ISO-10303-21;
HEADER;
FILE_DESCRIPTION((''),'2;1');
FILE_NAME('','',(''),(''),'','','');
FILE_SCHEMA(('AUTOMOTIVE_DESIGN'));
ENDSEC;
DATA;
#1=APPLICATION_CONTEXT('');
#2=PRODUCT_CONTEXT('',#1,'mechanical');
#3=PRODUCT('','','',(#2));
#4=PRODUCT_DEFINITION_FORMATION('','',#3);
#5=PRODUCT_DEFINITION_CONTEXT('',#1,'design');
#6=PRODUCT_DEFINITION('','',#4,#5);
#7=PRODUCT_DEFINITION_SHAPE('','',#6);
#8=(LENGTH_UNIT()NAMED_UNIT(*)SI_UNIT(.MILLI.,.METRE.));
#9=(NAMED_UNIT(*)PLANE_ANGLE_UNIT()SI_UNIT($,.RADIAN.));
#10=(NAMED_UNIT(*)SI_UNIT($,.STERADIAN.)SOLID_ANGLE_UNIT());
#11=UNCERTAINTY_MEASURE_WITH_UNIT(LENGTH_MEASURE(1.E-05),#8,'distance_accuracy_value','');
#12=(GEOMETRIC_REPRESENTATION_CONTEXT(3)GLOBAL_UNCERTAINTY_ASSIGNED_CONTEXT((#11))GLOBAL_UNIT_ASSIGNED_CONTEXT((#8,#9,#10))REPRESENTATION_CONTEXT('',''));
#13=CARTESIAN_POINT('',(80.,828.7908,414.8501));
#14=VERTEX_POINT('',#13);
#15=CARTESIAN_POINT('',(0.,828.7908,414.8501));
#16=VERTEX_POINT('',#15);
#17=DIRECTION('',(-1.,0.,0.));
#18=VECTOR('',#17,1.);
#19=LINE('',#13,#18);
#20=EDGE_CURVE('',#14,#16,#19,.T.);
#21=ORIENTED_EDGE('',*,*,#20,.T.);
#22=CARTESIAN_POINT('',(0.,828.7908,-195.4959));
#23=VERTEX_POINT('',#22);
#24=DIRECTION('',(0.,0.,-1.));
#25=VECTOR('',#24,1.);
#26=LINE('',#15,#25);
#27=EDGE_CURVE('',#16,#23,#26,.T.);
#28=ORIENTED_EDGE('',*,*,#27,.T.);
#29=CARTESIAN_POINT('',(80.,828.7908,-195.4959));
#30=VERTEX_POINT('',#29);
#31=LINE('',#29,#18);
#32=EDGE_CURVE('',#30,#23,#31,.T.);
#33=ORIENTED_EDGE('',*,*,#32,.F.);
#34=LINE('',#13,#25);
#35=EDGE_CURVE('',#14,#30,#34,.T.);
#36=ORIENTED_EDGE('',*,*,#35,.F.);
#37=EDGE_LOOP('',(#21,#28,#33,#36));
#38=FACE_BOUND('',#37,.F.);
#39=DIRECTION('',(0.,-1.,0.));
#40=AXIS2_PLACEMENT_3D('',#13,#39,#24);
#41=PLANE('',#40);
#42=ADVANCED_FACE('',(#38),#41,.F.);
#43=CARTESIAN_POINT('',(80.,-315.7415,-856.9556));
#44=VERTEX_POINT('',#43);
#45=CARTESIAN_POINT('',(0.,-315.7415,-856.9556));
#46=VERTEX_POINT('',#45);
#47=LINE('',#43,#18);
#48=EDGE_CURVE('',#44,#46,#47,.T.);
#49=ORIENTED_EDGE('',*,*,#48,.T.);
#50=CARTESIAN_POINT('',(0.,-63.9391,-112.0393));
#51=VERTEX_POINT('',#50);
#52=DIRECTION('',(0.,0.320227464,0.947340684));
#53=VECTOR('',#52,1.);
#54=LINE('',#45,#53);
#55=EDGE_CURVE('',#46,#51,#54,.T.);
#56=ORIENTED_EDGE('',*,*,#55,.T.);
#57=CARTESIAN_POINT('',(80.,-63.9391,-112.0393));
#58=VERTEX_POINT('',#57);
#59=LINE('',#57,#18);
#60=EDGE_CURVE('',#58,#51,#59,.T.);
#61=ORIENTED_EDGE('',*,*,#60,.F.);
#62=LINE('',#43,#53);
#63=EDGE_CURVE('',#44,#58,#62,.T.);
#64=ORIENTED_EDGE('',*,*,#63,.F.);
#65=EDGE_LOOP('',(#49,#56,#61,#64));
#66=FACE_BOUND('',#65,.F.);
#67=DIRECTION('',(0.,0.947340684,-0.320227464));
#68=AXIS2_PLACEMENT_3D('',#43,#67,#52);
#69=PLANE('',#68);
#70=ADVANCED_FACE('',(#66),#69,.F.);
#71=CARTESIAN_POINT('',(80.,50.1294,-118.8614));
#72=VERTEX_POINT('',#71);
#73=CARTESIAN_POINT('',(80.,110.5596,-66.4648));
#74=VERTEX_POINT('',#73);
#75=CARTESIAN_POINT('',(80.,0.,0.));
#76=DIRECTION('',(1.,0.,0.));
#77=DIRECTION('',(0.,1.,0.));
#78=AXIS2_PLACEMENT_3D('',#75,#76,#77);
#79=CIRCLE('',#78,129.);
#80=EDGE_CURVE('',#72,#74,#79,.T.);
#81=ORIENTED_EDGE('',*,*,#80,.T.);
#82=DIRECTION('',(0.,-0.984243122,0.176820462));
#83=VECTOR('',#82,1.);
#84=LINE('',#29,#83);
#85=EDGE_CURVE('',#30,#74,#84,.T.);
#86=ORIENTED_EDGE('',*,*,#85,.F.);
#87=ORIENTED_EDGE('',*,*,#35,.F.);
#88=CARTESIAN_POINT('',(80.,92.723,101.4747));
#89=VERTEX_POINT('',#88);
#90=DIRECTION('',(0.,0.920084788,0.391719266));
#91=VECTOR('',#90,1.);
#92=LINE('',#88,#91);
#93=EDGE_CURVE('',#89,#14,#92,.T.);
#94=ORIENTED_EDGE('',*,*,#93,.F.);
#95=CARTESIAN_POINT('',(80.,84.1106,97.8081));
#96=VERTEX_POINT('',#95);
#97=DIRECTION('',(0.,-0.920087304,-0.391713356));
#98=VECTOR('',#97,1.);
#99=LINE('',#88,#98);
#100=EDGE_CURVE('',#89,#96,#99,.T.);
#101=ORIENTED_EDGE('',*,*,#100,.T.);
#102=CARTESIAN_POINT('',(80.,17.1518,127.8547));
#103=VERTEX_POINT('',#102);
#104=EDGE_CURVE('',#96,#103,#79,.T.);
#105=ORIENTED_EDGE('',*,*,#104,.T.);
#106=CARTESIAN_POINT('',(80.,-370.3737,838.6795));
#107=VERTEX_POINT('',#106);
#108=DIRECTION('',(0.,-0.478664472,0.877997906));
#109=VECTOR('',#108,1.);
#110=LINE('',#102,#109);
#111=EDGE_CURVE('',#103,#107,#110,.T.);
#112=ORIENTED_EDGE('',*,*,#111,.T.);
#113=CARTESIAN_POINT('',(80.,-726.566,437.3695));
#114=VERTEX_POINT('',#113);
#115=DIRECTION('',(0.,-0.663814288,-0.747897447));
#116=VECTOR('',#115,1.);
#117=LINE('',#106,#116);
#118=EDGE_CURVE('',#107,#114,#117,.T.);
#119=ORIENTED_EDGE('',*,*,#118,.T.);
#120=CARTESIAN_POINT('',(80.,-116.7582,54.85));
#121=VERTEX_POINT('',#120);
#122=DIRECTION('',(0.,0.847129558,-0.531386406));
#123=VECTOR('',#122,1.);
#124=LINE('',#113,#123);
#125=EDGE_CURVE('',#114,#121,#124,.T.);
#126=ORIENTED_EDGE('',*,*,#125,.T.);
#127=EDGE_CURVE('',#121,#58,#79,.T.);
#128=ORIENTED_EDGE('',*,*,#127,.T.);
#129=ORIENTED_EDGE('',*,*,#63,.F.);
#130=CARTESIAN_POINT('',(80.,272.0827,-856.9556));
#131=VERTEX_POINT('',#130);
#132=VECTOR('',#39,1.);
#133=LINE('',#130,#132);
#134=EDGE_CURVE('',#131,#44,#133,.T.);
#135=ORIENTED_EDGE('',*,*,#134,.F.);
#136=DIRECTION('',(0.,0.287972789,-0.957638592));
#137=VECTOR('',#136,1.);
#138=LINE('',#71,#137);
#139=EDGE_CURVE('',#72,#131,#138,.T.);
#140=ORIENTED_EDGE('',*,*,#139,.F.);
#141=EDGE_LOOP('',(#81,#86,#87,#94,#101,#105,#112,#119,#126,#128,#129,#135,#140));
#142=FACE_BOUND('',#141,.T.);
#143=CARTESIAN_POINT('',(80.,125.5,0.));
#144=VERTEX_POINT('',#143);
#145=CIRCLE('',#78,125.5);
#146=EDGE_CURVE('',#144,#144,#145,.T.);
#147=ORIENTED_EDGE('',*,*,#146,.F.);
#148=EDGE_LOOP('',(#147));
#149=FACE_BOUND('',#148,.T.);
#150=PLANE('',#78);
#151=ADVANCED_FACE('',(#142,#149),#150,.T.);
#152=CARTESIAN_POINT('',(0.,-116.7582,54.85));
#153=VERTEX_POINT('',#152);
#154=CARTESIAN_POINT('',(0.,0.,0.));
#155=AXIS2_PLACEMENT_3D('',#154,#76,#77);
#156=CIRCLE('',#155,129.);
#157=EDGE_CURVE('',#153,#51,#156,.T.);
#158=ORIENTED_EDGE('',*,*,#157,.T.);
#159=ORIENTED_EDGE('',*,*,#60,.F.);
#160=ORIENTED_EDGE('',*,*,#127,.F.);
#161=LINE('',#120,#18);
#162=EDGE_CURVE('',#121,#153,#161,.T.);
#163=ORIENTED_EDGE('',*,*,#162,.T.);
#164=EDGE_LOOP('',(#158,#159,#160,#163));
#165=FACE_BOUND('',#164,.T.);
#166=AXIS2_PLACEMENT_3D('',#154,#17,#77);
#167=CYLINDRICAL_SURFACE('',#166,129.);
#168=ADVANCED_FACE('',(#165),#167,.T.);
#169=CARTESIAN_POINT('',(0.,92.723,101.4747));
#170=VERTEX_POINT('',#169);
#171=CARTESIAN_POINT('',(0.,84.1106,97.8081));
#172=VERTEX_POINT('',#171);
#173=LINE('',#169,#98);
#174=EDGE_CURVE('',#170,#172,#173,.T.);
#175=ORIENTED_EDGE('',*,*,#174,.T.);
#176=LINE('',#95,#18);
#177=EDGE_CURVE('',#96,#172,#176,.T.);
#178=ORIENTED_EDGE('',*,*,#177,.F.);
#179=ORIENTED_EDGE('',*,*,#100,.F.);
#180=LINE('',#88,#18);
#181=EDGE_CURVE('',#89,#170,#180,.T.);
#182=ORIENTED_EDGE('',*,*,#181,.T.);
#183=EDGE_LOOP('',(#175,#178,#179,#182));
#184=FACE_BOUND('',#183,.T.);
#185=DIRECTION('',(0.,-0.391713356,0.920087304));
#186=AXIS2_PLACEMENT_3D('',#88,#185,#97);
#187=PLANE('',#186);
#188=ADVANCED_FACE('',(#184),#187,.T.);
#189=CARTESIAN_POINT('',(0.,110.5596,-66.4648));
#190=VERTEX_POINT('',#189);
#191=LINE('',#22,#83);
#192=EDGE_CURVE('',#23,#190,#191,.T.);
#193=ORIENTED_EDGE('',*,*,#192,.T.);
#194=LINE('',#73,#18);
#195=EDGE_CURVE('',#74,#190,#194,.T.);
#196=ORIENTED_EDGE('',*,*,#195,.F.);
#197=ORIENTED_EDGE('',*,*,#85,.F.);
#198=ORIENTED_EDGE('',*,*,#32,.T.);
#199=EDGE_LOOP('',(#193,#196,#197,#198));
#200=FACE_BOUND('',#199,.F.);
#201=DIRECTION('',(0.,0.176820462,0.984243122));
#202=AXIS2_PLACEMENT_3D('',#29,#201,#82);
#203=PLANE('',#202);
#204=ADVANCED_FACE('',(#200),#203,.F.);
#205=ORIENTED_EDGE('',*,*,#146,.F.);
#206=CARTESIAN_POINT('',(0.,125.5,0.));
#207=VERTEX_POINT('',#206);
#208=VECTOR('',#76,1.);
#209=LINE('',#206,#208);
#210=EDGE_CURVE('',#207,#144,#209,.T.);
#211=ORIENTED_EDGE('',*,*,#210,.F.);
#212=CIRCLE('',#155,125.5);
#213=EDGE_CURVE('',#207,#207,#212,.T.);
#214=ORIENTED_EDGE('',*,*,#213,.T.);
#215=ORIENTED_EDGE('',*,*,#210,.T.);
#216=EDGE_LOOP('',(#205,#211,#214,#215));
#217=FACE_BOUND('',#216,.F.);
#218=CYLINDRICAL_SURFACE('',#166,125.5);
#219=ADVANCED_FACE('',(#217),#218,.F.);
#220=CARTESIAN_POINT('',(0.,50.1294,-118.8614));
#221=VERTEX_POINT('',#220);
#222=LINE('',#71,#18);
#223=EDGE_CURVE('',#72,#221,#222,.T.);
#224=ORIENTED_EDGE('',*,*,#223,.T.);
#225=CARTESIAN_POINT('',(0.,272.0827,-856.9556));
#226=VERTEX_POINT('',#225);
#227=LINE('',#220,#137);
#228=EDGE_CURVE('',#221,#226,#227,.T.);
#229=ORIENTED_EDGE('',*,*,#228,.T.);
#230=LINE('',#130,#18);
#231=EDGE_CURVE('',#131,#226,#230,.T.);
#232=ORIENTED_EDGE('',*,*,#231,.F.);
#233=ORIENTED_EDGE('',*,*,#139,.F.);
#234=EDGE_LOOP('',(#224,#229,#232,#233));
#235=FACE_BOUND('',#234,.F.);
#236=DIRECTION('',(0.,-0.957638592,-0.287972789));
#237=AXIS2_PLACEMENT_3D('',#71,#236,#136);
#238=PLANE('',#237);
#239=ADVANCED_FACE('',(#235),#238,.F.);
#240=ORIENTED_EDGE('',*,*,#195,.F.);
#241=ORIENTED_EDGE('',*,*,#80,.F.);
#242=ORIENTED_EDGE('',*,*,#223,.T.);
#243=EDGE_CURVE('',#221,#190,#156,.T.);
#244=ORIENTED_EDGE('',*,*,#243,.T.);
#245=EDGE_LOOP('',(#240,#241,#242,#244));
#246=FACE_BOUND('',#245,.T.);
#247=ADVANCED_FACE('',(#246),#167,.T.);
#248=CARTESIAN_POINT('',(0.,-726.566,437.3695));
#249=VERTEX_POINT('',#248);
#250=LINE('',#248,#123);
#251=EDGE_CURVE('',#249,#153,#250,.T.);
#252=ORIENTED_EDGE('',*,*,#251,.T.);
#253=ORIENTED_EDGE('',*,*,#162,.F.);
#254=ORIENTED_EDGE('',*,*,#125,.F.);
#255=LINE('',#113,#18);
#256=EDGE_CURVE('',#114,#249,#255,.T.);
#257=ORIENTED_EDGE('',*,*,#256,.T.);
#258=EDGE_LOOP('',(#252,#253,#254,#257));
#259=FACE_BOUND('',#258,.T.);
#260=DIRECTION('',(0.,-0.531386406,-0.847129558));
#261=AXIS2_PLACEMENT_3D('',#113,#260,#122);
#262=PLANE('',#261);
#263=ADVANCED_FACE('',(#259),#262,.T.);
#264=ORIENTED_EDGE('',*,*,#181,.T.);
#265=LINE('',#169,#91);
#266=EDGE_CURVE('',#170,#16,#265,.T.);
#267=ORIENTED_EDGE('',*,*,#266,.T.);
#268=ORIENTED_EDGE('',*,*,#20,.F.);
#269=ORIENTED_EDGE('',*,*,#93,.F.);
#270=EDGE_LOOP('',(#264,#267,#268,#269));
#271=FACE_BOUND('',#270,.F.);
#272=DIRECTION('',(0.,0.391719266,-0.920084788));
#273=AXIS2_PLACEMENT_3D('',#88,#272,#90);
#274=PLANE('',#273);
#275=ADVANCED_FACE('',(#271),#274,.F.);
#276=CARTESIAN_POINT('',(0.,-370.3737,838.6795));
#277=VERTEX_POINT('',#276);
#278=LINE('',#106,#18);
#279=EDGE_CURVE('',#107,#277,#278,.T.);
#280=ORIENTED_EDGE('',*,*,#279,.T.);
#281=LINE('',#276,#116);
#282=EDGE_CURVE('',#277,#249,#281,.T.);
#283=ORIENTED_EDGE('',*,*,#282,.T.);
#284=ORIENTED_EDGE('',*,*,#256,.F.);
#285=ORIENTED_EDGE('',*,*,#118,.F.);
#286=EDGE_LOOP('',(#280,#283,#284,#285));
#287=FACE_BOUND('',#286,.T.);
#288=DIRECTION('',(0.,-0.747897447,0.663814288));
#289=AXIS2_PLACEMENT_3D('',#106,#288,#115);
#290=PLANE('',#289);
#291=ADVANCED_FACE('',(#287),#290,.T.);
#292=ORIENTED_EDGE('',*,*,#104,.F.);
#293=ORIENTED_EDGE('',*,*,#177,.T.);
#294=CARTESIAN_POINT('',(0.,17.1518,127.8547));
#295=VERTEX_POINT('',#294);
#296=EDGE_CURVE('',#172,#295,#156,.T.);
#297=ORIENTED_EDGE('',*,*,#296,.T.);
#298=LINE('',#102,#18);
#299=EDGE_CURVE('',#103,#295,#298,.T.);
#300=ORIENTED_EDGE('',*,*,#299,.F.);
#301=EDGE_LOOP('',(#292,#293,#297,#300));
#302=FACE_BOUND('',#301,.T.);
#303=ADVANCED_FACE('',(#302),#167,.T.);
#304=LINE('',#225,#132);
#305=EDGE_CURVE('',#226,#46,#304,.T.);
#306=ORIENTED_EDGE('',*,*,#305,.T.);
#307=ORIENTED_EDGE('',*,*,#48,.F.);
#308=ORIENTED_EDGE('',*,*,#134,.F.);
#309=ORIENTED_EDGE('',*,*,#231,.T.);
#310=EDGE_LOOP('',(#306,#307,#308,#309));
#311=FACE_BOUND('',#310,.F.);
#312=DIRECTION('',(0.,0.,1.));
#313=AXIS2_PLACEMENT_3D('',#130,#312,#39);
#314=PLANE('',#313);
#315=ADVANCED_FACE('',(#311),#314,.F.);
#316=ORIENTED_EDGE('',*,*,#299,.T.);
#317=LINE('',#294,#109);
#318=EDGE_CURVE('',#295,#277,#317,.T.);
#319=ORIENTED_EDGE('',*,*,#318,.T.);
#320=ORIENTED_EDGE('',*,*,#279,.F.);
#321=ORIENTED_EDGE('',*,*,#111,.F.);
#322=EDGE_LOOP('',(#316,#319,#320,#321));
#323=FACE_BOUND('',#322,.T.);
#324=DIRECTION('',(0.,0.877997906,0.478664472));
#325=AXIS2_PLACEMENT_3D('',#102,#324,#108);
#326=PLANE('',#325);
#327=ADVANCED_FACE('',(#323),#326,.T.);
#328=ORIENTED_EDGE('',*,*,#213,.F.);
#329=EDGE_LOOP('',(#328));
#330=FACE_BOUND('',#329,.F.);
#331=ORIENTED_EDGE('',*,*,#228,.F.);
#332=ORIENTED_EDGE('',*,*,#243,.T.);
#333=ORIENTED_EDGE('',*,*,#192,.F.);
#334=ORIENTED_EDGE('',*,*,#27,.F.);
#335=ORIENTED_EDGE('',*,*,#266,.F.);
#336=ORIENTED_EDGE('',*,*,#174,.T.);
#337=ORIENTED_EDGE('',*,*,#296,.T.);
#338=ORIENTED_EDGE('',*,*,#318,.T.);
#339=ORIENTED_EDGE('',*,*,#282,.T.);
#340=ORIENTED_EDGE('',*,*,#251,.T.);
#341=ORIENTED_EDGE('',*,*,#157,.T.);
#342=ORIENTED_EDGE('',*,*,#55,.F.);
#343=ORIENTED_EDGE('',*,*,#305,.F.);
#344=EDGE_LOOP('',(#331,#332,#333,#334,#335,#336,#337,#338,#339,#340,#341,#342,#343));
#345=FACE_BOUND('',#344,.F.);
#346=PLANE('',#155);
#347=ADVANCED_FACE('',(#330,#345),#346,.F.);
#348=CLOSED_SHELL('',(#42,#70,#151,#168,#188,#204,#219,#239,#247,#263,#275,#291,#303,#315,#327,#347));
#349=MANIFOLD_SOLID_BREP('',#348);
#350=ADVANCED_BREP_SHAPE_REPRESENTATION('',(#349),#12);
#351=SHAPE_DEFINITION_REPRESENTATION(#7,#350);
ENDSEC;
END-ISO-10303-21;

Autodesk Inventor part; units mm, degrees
ref_plane "YZ Plane" through (0, 0, 0) normal (1, 0, 0) x (0, 1, 0)
ref_plane "XZ Plane" through (0, 0, 0) normal (0, 1, 0) x (-1, 0, 0)
ref_plane "XY Plane" through (0, 0, 0) normal (0, 0, 1) x (1, 0, 0)
sketch "Sketch1" plane through (0, 0, 0) normal (1, 0, 0) x (0, 1, 0)
  circle A0 centre (0, 0) radius 129
  circle A1 centre (0, 0) radius 125.5
  dimension "d0" = 258
  dimension "d1" = 251
extrude "Extrusion1" add sketch "Sketch1" along normal blind 80
sketch "Sketch2" plane through (80, 0, 0) normal (1, 0, 0) x (0, 0, -1)
  line L0 (-101.4747, 92.723) -> (-414.8501, 828.7908)
  line L1 (-414.8501, 828.7908) -> (195.4959, 828.7908)
  line L2 (195.4959, 828.7908) -> (66.4648, 110.5596)
  circle A0 centre (0, 0) radius 129 projected
  line L3 (-101.4747, 92.723) -> (-97.8081, 84.1106)
  line L4 (118.8614, 50.1294) -> (856.9556, 272.0827)
  line L5 (856.9556, 272.0827) -> (856.9556, -315.7415)
  line L6 (856.9556, -315.7415) -> (112.0393, -63.9391)
  line L7 (-127.8547, 17.1518) -> (-838.6795, -370.3737)
  line L8 (-838.6795, -370.3737) -> (-437.3695, -726.566)
  line L9 (-437.3695, -726.566) -> (-54.85, -116.7582)
  dimension "d4" = 800
extrude "Extrusion2" add sketch "Sketch2" against normal blind 80 contours L0 L1 L2 A0 L3 | A0 L9 L8 L7 | L4 L5 L6 A0
properties part number "fan blade"
